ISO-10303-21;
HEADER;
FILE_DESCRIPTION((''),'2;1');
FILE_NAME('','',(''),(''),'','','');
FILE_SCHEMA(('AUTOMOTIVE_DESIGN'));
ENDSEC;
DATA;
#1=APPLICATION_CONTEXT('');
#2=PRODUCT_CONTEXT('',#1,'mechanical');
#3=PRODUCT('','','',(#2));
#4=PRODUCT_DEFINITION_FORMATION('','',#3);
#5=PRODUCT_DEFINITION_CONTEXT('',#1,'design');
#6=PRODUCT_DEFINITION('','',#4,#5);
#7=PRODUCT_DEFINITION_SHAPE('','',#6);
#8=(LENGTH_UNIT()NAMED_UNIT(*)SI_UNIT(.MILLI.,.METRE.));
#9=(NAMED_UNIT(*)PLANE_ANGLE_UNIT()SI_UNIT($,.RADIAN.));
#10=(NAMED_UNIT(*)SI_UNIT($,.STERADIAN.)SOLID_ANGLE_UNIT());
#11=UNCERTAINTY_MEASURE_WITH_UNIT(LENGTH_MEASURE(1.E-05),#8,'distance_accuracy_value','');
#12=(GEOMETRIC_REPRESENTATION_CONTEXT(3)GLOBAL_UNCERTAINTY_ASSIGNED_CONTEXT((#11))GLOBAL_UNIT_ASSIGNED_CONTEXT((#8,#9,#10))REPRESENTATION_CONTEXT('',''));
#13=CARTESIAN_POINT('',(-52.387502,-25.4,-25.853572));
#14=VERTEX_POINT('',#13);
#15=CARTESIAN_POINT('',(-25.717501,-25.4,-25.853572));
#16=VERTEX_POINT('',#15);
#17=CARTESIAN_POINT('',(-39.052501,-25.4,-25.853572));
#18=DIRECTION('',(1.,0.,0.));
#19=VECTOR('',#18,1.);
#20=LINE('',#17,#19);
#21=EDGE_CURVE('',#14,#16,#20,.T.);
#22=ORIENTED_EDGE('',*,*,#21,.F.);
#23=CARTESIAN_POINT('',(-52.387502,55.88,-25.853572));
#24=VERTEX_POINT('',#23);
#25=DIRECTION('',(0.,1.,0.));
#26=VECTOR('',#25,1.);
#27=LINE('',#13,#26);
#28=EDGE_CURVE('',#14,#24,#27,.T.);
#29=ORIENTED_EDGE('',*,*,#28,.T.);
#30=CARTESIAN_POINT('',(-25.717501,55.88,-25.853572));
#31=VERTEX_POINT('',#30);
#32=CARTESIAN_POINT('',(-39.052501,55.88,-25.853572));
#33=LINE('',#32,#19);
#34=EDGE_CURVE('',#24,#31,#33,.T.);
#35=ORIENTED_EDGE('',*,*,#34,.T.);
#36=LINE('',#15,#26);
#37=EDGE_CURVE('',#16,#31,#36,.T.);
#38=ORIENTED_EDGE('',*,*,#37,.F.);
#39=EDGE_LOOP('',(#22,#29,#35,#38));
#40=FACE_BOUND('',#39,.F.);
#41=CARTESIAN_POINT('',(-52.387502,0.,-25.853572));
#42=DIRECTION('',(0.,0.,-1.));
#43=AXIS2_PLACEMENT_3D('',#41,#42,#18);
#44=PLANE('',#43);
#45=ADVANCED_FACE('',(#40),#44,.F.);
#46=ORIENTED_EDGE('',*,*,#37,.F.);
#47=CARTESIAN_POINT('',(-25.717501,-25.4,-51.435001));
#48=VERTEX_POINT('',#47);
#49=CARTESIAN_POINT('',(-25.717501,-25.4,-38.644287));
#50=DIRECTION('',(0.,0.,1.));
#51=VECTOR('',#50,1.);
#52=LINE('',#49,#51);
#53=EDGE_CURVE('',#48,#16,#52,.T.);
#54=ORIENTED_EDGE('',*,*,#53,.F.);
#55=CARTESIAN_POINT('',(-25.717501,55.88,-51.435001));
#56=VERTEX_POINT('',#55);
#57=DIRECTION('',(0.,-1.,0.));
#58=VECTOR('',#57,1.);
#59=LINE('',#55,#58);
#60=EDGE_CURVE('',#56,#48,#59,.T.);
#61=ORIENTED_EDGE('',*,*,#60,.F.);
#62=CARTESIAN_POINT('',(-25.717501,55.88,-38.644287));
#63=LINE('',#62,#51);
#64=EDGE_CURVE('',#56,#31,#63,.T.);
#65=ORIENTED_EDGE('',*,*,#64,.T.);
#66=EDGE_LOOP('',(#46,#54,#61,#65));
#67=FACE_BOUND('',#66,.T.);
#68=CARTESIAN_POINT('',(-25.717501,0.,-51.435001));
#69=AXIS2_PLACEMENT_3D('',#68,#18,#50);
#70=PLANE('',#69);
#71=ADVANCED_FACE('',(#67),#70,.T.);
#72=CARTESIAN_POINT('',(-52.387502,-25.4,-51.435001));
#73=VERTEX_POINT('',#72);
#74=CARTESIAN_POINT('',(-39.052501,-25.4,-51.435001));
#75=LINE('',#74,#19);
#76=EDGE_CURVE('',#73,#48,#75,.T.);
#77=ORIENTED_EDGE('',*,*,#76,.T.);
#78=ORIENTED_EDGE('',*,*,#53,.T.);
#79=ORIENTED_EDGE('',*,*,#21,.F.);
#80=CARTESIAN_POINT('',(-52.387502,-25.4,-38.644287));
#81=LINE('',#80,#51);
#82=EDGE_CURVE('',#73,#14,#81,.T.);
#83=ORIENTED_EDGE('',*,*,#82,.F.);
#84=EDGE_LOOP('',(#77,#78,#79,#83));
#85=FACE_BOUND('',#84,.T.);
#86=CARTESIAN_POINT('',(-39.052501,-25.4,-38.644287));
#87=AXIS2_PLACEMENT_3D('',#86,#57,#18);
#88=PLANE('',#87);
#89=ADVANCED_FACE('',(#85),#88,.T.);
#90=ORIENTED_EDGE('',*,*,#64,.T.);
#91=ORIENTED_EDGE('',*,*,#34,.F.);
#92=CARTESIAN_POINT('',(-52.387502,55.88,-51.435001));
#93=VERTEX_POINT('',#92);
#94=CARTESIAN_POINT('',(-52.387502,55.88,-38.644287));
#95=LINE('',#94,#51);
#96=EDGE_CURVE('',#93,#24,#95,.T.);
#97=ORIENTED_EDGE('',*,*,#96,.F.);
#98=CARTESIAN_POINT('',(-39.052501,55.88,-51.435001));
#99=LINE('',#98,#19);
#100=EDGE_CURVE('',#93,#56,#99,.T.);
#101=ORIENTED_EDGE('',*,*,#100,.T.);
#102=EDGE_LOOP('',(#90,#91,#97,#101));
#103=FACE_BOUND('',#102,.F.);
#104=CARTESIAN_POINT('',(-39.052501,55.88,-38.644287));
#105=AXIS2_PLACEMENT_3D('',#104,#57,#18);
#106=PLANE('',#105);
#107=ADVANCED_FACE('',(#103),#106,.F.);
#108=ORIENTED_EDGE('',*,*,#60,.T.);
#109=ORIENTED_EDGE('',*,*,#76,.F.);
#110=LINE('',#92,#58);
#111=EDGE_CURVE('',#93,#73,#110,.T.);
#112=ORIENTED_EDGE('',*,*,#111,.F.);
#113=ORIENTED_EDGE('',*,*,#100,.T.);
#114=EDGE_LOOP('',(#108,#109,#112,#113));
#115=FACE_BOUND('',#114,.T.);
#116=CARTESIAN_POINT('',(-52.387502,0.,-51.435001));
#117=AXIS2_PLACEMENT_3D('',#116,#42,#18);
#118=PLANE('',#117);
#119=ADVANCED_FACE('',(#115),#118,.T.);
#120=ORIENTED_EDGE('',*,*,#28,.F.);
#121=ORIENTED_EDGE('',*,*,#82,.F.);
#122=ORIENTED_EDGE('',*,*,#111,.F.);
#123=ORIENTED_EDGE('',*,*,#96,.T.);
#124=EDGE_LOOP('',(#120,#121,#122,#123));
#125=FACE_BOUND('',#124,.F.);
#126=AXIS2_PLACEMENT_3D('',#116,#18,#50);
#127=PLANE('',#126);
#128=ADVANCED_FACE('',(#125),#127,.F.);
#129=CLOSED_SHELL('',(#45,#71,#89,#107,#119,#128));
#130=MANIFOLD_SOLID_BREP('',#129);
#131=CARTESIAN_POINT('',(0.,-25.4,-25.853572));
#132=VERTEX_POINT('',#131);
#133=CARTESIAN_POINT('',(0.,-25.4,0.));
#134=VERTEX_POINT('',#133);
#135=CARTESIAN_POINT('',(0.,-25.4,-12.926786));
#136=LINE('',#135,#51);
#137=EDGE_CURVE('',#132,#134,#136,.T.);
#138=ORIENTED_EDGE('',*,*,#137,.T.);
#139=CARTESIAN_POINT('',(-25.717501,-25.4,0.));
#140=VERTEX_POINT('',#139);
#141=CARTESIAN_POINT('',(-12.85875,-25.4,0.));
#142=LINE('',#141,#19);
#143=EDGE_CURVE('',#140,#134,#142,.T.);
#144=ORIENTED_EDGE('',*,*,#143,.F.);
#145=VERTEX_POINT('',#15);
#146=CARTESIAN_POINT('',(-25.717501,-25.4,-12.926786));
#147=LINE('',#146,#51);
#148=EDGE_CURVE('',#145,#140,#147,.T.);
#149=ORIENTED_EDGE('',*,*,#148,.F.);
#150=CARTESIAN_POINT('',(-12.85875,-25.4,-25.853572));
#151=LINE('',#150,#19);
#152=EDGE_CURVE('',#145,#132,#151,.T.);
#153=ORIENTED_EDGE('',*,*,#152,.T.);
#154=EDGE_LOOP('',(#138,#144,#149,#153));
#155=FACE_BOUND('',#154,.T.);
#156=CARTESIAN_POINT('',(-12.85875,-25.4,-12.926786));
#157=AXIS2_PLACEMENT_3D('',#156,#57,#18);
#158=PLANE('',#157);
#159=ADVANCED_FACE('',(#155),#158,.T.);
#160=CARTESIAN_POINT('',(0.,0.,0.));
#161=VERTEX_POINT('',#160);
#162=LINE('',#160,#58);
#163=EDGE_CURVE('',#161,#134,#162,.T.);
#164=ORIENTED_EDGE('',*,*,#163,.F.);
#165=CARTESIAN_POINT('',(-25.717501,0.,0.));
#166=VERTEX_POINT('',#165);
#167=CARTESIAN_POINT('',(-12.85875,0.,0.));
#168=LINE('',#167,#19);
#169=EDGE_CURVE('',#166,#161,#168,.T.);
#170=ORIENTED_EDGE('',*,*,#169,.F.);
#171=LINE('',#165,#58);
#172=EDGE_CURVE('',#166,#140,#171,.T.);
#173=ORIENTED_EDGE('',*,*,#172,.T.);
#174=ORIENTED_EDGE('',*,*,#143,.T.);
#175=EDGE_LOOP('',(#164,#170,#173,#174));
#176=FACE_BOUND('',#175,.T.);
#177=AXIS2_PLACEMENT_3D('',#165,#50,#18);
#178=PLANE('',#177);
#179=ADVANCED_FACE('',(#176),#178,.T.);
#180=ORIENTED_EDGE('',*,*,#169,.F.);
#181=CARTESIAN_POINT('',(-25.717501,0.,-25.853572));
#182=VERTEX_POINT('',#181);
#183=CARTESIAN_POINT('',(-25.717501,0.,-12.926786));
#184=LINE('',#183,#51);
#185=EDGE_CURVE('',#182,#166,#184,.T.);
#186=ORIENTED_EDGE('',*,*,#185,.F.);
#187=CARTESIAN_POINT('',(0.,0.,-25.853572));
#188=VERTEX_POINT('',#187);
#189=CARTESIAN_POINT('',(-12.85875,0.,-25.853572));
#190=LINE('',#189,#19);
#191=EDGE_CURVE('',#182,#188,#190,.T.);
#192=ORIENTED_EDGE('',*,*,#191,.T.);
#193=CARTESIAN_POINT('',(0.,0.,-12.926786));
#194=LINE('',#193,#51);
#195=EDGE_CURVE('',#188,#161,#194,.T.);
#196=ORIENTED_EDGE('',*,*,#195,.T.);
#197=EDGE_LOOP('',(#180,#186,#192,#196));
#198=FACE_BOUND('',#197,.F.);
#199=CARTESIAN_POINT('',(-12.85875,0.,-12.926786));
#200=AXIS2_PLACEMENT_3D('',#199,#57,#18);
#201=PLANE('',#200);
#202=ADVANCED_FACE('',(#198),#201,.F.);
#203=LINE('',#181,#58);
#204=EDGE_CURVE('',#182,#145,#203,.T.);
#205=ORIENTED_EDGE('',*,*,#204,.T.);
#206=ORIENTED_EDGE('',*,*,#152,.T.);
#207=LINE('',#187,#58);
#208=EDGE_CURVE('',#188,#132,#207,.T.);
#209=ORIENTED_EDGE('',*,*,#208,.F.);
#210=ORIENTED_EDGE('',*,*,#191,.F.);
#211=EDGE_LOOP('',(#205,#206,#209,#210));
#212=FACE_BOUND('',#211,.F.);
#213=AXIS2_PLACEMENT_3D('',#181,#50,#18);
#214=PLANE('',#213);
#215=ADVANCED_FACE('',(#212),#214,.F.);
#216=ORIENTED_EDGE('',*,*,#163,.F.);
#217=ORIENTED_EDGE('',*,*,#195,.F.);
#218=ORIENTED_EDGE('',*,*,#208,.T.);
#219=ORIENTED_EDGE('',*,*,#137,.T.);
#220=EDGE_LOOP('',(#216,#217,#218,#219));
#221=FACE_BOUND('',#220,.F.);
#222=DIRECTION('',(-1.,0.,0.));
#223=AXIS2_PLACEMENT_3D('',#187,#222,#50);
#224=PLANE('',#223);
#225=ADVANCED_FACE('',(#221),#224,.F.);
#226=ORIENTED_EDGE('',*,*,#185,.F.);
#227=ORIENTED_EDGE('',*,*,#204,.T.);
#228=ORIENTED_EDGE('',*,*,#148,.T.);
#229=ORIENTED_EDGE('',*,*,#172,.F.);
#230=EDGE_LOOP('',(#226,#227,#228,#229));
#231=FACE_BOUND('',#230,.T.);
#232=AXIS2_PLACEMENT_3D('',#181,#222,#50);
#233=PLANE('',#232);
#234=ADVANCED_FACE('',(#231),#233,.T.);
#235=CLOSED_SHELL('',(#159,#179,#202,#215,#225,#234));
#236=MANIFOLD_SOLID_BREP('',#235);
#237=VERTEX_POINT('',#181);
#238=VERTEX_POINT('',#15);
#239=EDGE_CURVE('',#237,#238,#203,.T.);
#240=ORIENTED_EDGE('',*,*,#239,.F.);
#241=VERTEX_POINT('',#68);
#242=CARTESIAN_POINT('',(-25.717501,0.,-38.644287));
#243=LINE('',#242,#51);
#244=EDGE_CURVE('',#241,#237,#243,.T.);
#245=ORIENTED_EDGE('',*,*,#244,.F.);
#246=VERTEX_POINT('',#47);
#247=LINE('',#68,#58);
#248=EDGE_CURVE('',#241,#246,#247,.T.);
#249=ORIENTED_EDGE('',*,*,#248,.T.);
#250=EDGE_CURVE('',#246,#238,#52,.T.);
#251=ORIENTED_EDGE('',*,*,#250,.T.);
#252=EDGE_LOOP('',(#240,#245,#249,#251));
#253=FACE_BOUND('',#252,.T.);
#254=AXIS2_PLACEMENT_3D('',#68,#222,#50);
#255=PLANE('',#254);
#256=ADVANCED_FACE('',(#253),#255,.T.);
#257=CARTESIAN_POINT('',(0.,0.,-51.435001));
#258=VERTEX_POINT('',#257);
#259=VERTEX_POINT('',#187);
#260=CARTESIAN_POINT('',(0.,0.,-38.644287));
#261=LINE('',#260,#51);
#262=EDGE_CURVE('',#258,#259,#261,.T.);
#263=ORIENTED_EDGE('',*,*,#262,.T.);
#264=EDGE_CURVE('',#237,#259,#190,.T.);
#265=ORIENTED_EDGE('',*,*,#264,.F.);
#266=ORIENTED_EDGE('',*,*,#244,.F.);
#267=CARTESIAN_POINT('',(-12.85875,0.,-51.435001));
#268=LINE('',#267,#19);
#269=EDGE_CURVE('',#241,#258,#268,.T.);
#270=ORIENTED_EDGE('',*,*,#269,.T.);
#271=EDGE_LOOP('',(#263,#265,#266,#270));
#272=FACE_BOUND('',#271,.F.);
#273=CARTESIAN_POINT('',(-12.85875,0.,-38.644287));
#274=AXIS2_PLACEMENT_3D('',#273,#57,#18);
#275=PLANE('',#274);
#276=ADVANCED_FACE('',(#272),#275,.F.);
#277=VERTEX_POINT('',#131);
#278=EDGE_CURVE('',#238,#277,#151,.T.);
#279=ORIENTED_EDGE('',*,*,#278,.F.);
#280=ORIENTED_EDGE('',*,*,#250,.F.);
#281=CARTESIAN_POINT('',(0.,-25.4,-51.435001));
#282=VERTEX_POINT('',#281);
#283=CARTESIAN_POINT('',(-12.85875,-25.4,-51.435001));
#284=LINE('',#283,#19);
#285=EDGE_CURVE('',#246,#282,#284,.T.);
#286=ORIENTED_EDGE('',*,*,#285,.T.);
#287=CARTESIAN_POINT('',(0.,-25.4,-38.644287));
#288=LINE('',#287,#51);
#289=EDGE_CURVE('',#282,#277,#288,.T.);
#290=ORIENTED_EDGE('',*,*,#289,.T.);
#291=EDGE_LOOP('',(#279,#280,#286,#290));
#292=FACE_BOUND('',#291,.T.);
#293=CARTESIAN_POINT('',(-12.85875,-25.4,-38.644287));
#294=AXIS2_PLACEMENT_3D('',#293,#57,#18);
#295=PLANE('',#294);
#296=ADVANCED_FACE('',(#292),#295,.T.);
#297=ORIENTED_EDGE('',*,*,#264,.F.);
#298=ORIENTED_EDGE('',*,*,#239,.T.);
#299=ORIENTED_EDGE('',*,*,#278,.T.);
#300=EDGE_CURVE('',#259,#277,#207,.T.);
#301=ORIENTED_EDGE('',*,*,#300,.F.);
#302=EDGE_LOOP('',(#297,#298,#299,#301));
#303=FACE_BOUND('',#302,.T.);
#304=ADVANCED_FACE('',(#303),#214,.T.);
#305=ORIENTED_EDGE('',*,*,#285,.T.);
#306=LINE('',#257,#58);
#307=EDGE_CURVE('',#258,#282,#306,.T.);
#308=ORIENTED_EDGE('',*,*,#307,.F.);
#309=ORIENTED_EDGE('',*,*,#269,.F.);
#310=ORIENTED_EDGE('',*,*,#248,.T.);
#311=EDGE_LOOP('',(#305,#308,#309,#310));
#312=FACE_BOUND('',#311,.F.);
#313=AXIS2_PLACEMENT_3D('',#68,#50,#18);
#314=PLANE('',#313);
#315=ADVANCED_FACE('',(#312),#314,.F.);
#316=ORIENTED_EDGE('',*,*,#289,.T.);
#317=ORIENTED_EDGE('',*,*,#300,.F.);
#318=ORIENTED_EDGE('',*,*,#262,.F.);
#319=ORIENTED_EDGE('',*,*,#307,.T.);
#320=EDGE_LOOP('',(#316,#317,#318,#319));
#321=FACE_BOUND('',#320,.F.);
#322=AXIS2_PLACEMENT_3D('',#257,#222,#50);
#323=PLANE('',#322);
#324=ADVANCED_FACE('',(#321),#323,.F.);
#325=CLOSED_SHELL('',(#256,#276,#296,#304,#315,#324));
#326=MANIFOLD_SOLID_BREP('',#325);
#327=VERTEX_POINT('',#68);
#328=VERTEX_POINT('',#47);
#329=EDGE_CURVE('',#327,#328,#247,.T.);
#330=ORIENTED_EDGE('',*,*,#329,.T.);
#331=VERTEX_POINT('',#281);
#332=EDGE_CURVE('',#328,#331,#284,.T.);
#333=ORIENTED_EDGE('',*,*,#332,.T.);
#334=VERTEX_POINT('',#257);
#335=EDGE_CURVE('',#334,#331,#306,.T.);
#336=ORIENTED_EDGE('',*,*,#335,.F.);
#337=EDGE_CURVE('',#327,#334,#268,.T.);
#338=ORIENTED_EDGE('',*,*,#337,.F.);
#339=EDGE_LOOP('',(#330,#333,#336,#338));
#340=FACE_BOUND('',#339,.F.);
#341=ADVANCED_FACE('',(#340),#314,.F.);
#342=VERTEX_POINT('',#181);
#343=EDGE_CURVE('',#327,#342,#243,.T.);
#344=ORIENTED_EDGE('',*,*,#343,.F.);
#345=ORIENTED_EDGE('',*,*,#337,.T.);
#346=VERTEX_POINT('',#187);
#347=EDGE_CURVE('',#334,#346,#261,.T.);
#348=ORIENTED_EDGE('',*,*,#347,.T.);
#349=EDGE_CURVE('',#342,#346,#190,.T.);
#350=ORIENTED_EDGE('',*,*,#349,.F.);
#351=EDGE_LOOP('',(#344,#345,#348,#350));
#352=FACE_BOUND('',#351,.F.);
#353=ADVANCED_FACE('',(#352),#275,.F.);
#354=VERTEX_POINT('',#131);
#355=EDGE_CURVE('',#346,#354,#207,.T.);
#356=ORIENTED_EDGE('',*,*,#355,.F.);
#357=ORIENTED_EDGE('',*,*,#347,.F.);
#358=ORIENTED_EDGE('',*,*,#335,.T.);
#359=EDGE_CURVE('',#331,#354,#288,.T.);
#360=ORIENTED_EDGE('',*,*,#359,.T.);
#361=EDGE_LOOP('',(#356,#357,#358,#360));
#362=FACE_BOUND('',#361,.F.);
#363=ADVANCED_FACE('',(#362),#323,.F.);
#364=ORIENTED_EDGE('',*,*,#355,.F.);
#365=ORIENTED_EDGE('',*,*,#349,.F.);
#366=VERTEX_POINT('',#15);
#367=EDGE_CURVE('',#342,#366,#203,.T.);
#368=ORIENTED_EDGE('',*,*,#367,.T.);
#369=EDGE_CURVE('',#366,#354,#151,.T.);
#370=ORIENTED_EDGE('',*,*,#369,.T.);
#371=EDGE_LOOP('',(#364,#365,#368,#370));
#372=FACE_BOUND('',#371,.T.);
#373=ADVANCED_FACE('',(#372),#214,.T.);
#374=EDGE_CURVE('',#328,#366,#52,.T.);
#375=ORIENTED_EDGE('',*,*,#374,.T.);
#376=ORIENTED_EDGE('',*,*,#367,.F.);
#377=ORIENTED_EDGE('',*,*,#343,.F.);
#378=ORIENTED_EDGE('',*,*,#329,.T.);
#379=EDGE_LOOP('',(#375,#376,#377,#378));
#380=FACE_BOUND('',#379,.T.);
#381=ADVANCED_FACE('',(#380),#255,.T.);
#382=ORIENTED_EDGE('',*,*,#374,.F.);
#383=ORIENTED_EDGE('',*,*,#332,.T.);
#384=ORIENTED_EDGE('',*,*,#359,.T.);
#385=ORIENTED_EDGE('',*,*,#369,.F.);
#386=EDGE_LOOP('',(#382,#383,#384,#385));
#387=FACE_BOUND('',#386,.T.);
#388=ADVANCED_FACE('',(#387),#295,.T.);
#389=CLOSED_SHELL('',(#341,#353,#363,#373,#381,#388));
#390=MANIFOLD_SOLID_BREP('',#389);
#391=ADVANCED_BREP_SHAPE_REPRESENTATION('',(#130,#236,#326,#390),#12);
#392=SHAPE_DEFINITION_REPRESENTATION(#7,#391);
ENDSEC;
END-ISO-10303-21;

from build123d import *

# Parameters (mm, degrees)
F0_W     = 25.7175005972
F0_H     = 25.8535724133
F1_DEPTH = 25.4
F0_W_2   = 26.6700014472
F0_H_2   = 25.5814287812
F2_DEPTH = 25.4
F3_DEPTH = 25.4
F4_DEPTH = 25.4
F5_DEPTH = 55.88


with BuildPart() as f1:
    # F0 (on Front) → F1 (new body)
    with BuildSketch(Plane.XZ):
        with Locations((-12.8587502986, -12.9267862067)):
            Rectangle(F0_W, F0_H)
    extrude(amount=F1_DEPTH)


with BuildPart() as f2:
    # F0 (on Front) → F2 (new body)
    with BuildSketch(Plane.XZ):
        with Locations((-39.0525013208, -38.6442868039)):
            Rectangle(F0_W_2, F0_H_2)
    extrude(amount=F2_DEPTH)

    # F0 (on Front) → F5 (join)
    with BuildSketch(Plane.XZ):
        with Locations((-39.0525013208, -38.6442868039)):
            Rectangle(F0_W_2, F0_H_2)
    extrude(amount=-F5_DEPTH)


with BuildPart() as f3:
    # F0 (on Front) → F3 (new body)
    with BuildSketch(Plane.XZ):
        with Locations((-12.8587502986, -38.6442868039)):
            Rectangle(F0_W, F0_H_2)
    extrude(amount=F3_DEPTH)


with BuildPart() as f4:
    # F0 (on Front) → F4 (new body)
    with BuildSketch(Plane.XZ):
        with Locations((-12.8587502986, -38.6442868039)):
            Rectangle(F0_W, F0_H_2)
    extrude(amount=F4_DEPTH)


solid = Compound([f1.part, f2.part, f3.part, f4.part])
